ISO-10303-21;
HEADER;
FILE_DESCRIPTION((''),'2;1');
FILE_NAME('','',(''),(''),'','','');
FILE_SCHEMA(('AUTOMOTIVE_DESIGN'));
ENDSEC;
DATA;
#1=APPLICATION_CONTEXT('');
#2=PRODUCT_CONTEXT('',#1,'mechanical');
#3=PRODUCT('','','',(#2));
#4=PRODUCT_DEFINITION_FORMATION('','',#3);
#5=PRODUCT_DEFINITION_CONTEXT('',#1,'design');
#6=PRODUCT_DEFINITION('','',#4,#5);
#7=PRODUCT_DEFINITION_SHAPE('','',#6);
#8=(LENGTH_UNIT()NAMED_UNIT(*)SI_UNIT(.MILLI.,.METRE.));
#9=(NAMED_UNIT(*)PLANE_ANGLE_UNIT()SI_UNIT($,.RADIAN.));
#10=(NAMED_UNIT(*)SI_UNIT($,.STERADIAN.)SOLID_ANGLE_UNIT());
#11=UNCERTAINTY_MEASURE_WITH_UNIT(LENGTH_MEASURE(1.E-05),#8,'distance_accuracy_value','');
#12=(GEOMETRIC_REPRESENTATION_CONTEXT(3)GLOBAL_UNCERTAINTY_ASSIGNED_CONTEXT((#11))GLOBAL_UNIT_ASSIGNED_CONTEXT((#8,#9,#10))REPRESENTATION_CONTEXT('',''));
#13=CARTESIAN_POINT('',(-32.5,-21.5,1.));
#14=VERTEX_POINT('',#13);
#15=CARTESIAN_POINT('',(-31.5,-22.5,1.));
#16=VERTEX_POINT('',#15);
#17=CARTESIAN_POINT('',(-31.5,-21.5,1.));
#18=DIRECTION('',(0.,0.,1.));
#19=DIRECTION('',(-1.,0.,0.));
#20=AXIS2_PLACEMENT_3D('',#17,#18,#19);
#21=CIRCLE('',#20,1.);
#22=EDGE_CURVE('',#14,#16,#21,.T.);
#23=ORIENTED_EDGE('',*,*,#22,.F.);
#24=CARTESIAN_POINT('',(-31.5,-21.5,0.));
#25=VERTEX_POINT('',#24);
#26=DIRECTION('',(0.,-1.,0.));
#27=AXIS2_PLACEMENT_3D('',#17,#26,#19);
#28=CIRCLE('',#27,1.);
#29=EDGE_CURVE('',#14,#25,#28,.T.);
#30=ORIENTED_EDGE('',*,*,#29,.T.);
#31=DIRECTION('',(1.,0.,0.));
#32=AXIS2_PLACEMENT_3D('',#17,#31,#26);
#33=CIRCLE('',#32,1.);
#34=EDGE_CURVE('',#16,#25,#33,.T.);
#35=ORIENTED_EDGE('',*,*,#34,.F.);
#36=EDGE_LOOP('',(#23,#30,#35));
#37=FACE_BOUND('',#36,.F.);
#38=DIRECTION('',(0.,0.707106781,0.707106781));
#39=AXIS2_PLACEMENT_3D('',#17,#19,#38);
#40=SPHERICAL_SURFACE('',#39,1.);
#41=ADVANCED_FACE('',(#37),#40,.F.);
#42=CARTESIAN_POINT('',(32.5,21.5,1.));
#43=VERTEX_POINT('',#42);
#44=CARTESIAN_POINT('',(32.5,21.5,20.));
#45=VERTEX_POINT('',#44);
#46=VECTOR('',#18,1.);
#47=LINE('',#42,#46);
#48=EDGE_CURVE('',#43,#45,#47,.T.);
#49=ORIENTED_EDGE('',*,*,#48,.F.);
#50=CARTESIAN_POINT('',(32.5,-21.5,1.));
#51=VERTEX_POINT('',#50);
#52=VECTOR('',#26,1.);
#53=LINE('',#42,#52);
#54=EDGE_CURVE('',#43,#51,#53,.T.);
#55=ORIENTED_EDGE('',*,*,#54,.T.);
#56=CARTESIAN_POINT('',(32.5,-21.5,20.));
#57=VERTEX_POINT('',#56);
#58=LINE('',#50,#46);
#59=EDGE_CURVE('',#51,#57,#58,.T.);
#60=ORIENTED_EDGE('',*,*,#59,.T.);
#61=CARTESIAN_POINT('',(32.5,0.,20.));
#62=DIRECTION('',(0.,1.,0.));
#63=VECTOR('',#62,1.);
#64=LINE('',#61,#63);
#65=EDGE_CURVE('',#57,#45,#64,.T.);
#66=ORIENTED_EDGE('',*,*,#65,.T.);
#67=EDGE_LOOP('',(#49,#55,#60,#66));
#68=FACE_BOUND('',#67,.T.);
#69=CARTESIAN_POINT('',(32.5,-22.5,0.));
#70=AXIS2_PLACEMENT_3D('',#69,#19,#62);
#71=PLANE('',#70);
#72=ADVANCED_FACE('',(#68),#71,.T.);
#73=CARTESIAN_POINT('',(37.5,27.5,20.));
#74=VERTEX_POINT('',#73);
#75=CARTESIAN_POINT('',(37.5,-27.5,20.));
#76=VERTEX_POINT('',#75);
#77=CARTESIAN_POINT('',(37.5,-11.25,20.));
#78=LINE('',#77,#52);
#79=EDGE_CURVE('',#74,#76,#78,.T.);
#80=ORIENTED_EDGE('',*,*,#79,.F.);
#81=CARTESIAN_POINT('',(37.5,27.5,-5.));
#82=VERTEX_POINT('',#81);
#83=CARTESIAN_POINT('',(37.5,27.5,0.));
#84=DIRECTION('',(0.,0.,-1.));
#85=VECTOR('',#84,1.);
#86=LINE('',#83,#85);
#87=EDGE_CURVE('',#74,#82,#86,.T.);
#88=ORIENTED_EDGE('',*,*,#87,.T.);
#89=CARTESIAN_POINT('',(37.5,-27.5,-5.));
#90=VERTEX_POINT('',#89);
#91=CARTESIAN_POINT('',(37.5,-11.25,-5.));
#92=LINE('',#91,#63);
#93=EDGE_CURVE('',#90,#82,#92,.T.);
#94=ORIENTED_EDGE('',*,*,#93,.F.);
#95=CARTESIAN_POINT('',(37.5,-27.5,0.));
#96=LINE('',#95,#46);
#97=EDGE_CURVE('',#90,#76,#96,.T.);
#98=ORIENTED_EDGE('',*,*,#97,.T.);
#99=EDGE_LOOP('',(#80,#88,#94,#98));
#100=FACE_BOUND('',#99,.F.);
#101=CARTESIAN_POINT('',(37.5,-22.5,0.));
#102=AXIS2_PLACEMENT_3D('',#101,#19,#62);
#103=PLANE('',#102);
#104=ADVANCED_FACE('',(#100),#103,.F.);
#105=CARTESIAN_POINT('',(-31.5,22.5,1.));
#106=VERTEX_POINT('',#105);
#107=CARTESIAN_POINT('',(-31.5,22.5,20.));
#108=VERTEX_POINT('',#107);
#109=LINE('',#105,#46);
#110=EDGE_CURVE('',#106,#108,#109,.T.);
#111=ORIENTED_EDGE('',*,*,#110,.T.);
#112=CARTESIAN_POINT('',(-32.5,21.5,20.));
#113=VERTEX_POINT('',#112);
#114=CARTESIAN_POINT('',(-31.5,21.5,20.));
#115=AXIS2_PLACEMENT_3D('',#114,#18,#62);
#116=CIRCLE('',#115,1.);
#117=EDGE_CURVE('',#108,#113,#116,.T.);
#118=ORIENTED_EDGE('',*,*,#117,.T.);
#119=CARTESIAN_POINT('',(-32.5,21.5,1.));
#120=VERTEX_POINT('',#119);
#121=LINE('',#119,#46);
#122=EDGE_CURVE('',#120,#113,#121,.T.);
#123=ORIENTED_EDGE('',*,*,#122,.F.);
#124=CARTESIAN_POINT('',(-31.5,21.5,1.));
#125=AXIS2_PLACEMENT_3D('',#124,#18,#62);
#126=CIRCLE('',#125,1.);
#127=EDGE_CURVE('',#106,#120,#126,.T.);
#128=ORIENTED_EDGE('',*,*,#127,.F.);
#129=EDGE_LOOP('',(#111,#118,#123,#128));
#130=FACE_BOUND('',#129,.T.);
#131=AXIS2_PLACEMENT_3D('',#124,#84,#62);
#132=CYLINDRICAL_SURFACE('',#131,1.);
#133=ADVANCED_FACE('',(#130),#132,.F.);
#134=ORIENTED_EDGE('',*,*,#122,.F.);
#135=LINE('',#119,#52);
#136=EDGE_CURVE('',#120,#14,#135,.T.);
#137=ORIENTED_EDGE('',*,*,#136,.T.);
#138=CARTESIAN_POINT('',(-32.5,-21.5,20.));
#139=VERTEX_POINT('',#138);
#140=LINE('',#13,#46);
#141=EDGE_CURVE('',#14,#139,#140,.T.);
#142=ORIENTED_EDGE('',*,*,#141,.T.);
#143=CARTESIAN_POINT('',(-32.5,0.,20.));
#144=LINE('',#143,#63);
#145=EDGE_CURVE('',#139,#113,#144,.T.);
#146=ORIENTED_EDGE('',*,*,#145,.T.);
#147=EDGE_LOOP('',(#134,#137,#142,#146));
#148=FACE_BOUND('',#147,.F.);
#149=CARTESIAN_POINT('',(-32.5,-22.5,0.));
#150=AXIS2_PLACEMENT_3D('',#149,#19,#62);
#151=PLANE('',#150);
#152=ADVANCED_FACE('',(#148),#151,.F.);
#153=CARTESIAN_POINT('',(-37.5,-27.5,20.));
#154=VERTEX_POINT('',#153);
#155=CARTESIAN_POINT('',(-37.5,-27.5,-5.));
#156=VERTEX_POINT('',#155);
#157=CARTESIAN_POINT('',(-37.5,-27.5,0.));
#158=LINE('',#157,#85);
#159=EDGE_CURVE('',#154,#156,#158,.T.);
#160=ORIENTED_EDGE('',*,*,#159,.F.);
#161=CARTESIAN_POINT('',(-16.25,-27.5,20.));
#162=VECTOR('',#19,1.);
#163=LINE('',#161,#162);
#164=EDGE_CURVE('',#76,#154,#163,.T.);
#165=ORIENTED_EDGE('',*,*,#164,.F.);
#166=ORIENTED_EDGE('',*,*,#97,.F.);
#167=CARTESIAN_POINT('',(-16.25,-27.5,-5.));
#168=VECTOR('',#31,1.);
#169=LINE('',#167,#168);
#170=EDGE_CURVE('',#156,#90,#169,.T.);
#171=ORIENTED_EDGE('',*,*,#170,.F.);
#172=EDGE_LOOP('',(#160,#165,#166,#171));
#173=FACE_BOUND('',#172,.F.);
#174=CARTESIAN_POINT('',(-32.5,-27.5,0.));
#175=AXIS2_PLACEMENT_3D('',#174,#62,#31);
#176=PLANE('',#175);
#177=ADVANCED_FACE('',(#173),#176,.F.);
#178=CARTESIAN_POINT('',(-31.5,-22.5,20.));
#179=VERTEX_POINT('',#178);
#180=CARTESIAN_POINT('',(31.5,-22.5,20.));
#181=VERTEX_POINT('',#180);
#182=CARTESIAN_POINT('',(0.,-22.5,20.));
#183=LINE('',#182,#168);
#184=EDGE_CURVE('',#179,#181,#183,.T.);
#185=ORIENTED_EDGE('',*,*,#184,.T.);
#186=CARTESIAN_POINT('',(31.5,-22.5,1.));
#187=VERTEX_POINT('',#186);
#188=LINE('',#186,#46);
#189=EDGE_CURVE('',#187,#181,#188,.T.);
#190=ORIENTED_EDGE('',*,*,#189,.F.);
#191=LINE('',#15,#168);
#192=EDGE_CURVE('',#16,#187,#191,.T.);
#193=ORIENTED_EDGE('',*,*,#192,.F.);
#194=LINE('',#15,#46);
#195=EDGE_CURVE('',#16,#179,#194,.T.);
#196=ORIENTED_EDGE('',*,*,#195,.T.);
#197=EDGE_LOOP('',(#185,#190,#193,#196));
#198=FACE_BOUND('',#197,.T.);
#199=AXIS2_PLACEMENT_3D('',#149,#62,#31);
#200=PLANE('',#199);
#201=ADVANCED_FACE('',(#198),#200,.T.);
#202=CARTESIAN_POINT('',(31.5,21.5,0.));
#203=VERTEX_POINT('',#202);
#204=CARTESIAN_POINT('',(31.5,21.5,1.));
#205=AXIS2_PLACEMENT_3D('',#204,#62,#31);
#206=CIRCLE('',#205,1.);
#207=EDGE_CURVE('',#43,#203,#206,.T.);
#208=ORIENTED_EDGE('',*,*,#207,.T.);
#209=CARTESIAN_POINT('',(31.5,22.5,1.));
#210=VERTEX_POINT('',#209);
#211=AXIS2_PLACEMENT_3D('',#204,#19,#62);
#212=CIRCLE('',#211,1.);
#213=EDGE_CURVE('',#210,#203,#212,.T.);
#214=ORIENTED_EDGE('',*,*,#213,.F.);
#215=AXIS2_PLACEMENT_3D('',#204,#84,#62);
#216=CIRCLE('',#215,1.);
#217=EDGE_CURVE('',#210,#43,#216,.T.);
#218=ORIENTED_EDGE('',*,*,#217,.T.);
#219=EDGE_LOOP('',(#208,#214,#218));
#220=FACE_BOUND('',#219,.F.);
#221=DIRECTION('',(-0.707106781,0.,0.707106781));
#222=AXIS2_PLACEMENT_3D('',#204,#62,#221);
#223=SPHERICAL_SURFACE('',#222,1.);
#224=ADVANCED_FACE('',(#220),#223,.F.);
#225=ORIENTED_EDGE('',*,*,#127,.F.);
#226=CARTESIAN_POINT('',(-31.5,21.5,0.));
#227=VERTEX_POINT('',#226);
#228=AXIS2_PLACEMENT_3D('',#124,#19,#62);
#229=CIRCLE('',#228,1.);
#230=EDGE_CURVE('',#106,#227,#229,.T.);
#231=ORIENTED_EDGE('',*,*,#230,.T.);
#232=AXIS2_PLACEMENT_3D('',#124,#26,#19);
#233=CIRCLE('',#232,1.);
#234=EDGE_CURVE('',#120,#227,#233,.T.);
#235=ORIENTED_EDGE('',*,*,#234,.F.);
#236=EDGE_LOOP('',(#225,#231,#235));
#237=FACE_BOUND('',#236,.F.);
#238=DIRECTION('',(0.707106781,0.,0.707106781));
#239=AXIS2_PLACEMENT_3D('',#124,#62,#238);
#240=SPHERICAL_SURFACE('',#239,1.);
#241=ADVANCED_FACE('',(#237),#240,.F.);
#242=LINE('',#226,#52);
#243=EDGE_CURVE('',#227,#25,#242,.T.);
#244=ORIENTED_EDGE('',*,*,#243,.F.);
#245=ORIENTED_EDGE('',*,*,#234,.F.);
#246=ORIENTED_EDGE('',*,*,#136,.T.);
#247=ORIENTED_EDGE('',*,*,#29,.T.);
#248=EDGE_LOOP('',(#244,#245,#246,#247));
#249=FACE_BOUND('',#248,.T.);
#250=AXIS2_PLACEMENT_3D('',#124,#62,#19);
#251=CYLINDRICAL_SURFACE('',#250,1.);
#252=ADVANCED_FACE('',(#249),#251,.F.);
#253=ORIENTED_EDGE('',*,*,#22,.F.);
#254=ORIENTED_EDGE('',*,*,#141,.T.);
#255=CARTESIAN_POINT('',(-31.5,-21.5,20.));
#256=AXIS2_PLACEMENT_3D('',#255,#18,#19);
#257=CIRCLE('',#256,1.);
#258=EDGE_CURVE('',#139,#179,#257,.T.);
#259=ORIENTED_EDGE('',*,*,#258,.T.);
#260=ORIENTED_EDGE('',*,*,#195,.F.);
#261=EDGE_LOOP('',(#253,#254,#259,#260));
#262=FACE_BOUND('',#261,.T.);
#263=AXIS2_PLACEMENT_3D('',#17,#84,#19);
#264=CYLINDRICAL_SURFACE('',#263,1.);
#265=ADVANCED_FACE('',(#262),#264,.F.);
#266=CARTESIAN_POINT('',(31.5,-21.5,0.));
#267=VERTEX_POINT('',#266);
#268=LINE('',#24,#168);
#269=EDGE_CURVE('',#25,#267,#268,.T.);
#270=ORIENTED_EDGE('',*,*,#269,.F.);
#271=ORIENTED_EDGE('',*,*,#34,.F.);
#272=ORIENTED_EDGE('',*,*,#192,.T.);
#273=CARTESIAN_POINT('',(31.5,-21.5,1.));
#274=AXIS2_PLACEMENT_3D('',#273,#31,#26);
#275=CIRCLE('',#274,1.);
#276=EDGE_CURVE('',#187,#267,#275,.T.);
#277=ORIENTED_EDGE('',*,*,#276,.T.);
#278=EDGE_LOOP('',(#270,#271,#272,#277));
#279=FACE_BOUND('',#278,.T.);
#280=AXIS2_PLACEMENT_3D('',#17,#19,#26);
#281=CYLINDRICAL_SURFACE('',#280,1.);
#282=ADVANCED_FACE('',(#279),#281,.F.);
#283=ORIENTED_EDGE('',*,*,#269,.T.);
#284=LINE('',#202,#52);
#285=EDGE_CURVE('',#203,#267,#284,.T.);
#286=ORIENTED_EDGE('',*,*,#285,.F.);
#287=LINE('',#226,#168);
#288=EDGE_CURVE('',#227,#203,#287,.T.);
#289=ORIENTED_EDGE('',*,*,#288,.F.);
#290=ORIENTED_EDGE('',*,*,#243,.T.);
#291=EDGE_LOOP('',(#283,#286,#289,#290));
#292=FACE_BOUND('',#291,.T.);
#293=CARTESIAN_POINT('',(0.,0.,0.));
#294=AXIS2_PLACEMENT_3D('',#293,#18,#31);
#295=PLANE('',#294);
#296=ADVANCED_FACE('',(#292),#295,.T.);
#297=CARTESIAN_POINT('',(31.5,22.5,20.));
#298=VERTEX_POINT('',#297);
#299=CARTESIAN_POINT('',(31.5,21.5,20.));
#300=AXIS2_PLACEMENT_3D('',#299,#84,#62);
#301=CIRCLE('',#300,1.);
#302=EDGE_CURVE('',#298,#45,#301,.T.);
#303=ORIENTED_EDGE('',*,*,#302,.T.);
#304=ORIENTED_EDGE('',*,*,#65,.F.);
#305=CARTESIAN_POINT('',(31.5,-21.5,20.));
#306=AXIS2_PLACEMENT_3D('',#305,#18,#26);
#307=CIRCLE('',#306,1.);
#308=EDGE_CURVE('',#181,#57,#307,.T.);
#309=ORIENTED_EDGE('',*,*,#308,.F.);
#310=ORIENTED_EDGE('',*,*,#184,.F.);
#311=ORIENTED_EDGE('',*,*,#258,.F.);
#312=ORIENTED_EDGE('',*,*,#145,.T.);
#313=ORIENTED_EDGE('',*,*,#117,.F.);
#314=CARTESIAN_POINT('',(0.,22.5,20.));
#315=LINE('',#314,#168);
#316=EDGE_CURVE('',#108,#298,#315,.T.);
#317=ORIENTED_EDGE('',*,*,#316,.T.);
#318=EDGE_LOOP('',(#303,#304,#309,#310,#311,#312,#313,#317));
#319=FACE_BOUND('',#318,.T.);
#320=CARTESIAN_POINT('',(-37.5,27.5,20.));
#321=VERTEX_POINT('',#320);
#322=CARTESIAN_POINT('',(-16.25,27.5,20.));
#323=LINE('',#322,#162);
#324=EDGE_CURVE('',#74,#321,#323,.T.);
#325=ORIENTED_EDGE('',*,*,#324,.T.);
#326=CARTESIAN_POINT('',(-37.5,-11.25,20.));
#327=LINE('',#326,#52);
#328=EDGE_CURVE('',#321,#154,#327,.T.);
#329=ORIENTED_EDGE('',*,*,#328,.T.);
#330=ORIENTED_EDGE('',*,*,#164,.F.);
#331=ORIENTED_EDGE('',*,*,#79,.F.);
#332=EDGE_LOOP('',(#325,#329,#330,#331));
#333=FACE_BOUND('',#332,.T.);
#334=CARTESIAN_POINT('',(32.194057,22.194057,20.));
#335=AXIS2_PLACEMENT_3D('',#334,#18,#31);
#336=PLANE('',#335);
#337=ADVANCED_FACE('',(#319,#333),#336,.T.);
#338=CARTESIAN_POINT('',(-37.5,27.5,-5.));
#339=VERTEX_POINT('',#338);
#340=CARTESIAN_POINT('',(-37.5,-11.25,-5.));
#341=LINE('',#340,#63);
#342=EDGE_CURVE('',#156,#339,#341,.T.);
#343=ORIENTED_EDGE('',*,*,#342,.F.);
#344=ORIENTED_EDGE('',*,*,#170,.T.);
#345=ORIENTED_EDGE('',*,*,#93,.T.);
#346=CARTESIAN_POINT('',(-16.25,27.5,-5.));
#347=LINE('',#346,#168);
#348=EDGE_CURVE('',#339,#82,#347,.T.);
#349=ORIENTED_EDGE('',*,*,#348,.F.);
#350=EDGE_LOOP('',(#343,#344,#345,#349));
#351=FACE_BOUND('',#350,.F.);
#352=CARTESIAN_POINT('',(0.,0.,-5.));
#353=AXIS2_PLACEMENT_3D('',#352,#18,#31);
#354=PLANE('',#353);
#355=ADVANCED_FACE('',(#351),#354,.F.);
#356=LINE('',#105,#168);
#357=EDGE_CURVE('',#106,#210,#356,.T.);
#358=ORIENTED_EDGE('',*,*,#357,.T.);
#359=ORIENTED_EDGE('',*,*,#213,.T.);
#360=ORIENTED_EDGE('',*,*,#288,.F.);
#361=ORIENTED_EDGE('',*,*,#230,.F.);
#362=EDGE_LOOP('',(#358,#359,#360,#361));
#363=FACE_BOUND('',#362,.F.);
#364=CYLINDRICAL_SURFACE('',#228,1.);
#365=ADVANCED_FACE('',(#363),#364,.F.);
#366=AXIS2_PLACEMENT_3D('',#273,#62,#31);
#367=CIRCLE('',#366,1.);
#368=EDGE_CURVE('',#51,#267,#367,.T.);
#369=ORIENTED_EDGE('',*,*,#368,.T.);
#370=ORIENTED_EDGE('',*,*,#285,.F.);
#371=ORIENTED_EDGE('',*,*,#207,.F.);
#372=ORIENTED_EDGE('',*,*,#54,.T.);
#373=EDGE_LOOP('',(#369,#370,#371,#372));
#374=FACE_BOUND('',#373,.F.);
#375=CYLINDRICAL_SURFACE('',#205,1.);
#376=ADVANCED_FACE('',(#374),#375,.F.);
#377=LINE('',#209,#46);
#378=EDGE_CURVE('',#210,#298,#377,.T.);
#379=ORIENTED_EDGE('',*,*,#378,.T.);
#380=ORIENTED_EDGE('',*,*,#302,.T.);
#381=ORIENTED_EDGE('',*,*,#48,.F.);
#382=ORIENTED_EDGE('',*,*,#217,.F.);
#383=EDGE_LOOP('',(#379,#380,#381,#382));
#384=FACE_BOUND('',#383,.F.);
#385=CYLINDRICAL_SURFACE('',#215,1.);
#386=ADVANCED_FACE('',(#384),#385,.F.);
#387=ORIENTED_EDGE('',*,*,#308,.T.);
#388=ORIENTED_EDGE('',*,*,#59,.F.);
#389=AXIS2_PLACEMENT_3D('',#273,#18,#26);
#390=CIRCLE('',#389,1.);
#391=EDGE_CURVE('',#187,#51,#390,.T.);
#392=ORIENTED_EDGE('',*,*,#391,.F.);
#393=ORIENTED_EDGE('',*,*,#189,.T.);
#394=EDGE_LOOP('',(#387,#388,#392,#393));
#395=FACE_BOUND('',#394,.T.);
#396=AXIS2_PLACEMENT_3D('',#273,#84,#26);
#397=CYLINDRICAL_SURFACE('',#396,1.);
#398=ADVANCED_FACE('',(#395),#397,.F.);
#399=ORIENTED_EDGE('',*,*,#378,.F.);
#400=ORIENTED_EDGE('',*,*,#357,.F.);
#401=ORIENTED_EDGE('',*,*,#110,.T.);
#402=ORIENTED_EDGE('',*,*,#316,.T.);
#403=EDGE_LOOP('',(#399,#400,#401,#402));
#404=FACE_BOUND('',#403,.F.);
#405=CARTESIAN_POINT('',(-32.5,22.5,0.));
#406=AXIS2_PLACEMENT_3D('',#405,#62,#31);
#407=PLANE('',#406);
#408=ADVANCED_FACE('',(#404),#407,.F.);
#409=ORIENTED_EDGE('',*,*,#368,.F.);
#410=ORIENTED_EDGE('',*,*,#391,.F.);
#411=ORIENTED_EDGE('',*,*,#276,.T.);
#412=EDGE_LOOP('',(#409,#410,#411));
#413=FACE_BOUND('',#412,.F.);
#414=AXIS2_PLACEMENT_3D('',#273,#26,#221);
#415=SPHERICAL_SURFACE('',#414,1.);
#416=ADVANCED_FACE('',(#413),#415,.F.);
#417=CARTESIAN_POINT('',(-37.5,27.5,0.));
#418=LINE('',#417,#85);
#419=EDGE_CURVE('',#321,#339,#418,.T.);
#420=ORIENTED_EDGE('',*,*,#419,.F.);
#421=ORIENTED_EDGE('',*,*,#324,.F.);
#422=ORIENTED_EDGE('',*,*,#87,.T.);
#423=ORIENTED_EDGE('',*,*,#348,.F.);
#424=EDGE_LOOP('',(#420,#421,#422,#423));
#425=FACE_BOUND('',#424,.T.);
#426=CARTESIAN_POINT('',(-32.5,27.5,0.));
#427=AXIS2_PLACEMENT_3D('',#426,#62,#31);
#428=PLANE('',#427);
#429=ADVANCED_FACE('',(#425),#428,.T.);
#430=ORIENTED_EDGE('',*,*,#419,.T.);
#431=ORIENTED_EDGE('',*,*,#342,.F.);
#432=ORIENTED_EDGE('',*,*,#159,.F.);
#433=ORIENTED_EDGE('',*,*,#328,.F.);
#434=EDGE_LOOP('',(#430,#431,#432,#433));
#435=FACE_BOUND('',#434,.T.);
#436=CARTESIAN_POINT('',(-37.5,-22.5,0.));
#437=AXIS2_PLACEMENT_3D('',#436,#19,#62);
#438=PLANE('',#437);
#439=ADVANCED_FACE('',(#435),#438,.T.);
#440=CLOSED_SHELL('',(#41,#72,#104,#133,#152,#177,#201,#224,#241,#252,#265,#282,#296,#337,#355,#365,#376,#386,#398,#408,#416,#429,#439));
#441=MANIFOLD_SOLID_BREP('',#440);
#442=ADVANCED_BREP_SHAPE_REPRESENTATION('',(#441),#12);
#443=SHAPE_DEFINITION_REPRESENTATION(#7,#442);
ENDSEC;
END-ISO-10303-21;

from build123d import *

# Parameters (mm, degrees)
F0_W         = 65
F0_H         = 45
F1_DEPTH     = 20
F2_T         = 5
F3_T1_DEPTH  = 19
F3_T3_DEPTH  = 63
F3_T5_DEPTH  = 43
F3_S9_W      = 1
F3_S9_H      = 1
F3_T10_DEPTH = 1
F3_S15_W     = 1
F3_S15_H     = 1
F3_T16_DEPTH = 1
F3_S21_W     = 1
F3_S21_H     = 1
F3_T22_DEPTH = 1
F3_S27_W     = 1
F3_S27_H     = 1
F3_T28_DEPTH = 1


# Not quite as in the source:
# - a fillet or chamfer that OpenCascade refuses, or shapes differently, is made with other operations: its cross-section is extruded or revolved along the edge and cut away or added


with BuildPart() as f1:
    # F0 (on Top) → F1 (new body)
    with BuildSketch(Plane.XY):
        Rectangle(F0_W, F0_H)
    extrude(amount=F1_DEPTH)

    # F2
    f2_openings = [f1.faces().sort_by_distance(p)[0] for p in [
        (0, 0, 20),
    ]]
    offset(amount=F2_T, openings=f2_openings, kind=Kind.INTERSECTION)

    # F3: fillet of radius 1 on 8 edges, made by hand

    # F3_s2 → F3_t1 (join)
    with BuildSketch(Plane.XY.offset(1)):
        with BuildLine():
            ThreePointArc((31.5, 22.5), (32.2071067812, 22.2071067812), (32.5, 21.5))
            Line((32.5, 21.5), (32.5, 22.5))
            Line((32.5, 22.5), (31.5, 22.5))
        make_face()
        with BuildLine():
            ThreePointArc((-31.5, 22.5), (-32.2071067812, 22.2071067812), (-32.5, 21.5))
            Line((-32.5, 21.5), (-32.5, 22.5))
            Line((-32.5, 22.5), (-31.5, 22.5))
        make_face()
        with BuildLine():
            ThreePointArc((-32.5, -21.5), (-32.2071067812, -22.2071067812), (-31.5, -22.5))
            Line((-31.5, -22.5), (-32.5, -22.5))
            Line((-32.5, -22.5), (-32.5, -21.5))
        make_face()
        with BuildLine():
            ThreePointArc((31.5, -22.5), (32.2071067812, -22.2071067812), (32.5, -21.5))
            Line((32.5, -21.5), (32.5, -22.5))
            Line((32.5, -22.5), (31.5, -22.5))
        make_face()
    extrude(amount=F3_T1_DEPTH)

    # F3_s4 → F3_t3 (join)
    with BuildSketch(Plane.YZ.offset(-31.5)):
        with BuildLine():
            ThreePointArc((22.5, 1), (22.2071067812, 0.2928932188), (21.5, 0))
            Line((21.5, 0), (22.5, 0))
            Line((22.5, 0), (22.5, 1))
        make_face()
        with BuildLine():
            ThreePointArc((-22.5, 1), (-22.2071067812, 0.2928932188), (-21.5, 0))
            Line((-21.5, 0), (-22.5, 0))
            Line((-22.5, 0), (-22.5, 1))
        make_face()
    extrude(amount=F3_T3_DEPTH)

    # F3_s6 → F3_t5 (join)
    with BuildSketch(Plane.XZ.offset(-21.5)):
        with BuildLine():
            ThreePointArc((-32.5, 1), (-32.2071067812, 0.2928932188), (-31.5, 0))
            Line((-31.5, 0), (-32.5, 0))
            Line((-32.5, 0), (-32.5, 1))
        make_face()
        with BuildLine():
            ThreePointArc((32.5, 1), (32.2071067812, 0.2928932188), (31.5, 0))
            Line((31.5, 0), (32.5, 0))
            Line((32.5, 0), (32.5, 1))
        make_face()
    extrude(amount=F3_T5_DEPTH)


with BuildPart() as f3_tool8:
    # F3_s9 → F3_t10 (new body)
    with BuildSketch(Plane.XZ.offset(-21.5)):
        with Locations((32, 0.5)):
            Rectangle(F3_S9_W, F3_S9_H)
    extrude(amount=-F3_T10_DEPTH)

    # F3_s11 → F3_t12 (revolve, cut)
    with BuildSketch(Plane(origin=(31.5, 21.5, 1), x_dir=(-0.7071067812, 0, 0.7071067812), z_dir=(-0.7071067812, 0, -0.7071067812))):
        with BuildLine():
            ThreePointArc((0, -1), (1, 0), (0, 1))
            Line((0, 1), (0, -1))
        make_face()
    revolve(axis=Axis((31.5, 21.5, 1), (0, 1, 0)), mode=Mode.SUBTRACT)


with BuildPart() as f1_1:
    add(f1.part)

    # F3_t7: union F3_tool8
    add(f3_tool8.part)


with BuildPart() as f3_tool14:
    # F3_s15 → F3_t16 (new body)
    with BuildSketch(Plane.XZ.offset(-21.5)):
        with Locations((-32, 0.5)):
            Rectangle(F3_S15_W, F3_S15_H)
    extrude(amount=-F3_T16_DEPTH)

    # F3_s17 → F3_t18 (revolve, cut)
    with BuildSketch(Plane(origin=(-31.5, 21.5, 1), x_dir=(0.7071067812, 0, 0.7071067812), z_dir=(-0.7071067812, 0, 0.7071067812))):
        with BuildLine():
            ThreePointArc((0, -1), (1, 0), (0, 1))
            Line((0, 1), (0, -1))
        make_face()
    revolve(axis=Axis((-31.5, 21.5, 1), (0, 1, 0)), mode=Mode.SUBTRACT)


with BuildPart() as f1_2:
    add(f1_1.part)

    # F3_t13: union F3_tool14
    add(f3_tool14.part)


with BuildPart() as f3_tool20:
    # F3_s21 → F3_t22 (new body)
    with BuildSketch(Plane.YZ.offset(-31.5)):
        with Locations((-22, 0.5)):
            Rectangle(F3_S21_W, F3_S21_H)
    extrude(amount=-F3_T22_DEPTH)

    # F3_s23 → F3_t24 (revolve, cut)
    with BuildSketch(Plane(origin=(-31.5, -21.5, 1), x_dir=(0, 0.7071067812, 0.7071067812), z_dir=(0, -0.7071067812, 0.7071067812))):
        with BuildLine():
            ThreePointArc((0, -1), (1, 0), (0, 1))
            Line((0, 1), (0, -1))
        make_face()
    revolve(axis=Axis((-31.5, -21.5, 1), (-1, 0, 0)), mode=Mode.SUBTRACT)


with BuildPart() as f1_3:
    add(f1_2.part)

    # F3_t19: union F3_tool20
    add(f3_tool20.part)


with BuildPart() as f3_tool26:
    # F3_s27 → F3_t28 (new body)
    with BuildSketch(Plane.XZ.offset(21.5)):
        with Locations((32, 0.5)):
            Rectangle(F3_S27_W, F3_S27_H)
    extrude(amount=F3_T28_DEPTH)

    # F3_s29 → F3_t30 (revolve, cut)
    with BuildSketch(Plane(origin=(31.5, -21.5, 1), x_dir=(-0.7071067812, 0, 0.7071067812), z_dir=(0.7071067812, 0, 0.7071067812))):
        with BuildLine():
            ThreePointArc((0, -1), (1, 0), (0, 1))
            Line((0, 1), (0, -1))
        make_face()
    revolve(axis=Axis((31.5, -21.5, 1), (0, -1, 0)), mode=Mode.SUBTRACT)


with BuildPart() as f1_4:
    add(f1_3.part)

    # F3_t25: union F3_tool26
    add(f3_tool26.part)


solid = f1_4.part
